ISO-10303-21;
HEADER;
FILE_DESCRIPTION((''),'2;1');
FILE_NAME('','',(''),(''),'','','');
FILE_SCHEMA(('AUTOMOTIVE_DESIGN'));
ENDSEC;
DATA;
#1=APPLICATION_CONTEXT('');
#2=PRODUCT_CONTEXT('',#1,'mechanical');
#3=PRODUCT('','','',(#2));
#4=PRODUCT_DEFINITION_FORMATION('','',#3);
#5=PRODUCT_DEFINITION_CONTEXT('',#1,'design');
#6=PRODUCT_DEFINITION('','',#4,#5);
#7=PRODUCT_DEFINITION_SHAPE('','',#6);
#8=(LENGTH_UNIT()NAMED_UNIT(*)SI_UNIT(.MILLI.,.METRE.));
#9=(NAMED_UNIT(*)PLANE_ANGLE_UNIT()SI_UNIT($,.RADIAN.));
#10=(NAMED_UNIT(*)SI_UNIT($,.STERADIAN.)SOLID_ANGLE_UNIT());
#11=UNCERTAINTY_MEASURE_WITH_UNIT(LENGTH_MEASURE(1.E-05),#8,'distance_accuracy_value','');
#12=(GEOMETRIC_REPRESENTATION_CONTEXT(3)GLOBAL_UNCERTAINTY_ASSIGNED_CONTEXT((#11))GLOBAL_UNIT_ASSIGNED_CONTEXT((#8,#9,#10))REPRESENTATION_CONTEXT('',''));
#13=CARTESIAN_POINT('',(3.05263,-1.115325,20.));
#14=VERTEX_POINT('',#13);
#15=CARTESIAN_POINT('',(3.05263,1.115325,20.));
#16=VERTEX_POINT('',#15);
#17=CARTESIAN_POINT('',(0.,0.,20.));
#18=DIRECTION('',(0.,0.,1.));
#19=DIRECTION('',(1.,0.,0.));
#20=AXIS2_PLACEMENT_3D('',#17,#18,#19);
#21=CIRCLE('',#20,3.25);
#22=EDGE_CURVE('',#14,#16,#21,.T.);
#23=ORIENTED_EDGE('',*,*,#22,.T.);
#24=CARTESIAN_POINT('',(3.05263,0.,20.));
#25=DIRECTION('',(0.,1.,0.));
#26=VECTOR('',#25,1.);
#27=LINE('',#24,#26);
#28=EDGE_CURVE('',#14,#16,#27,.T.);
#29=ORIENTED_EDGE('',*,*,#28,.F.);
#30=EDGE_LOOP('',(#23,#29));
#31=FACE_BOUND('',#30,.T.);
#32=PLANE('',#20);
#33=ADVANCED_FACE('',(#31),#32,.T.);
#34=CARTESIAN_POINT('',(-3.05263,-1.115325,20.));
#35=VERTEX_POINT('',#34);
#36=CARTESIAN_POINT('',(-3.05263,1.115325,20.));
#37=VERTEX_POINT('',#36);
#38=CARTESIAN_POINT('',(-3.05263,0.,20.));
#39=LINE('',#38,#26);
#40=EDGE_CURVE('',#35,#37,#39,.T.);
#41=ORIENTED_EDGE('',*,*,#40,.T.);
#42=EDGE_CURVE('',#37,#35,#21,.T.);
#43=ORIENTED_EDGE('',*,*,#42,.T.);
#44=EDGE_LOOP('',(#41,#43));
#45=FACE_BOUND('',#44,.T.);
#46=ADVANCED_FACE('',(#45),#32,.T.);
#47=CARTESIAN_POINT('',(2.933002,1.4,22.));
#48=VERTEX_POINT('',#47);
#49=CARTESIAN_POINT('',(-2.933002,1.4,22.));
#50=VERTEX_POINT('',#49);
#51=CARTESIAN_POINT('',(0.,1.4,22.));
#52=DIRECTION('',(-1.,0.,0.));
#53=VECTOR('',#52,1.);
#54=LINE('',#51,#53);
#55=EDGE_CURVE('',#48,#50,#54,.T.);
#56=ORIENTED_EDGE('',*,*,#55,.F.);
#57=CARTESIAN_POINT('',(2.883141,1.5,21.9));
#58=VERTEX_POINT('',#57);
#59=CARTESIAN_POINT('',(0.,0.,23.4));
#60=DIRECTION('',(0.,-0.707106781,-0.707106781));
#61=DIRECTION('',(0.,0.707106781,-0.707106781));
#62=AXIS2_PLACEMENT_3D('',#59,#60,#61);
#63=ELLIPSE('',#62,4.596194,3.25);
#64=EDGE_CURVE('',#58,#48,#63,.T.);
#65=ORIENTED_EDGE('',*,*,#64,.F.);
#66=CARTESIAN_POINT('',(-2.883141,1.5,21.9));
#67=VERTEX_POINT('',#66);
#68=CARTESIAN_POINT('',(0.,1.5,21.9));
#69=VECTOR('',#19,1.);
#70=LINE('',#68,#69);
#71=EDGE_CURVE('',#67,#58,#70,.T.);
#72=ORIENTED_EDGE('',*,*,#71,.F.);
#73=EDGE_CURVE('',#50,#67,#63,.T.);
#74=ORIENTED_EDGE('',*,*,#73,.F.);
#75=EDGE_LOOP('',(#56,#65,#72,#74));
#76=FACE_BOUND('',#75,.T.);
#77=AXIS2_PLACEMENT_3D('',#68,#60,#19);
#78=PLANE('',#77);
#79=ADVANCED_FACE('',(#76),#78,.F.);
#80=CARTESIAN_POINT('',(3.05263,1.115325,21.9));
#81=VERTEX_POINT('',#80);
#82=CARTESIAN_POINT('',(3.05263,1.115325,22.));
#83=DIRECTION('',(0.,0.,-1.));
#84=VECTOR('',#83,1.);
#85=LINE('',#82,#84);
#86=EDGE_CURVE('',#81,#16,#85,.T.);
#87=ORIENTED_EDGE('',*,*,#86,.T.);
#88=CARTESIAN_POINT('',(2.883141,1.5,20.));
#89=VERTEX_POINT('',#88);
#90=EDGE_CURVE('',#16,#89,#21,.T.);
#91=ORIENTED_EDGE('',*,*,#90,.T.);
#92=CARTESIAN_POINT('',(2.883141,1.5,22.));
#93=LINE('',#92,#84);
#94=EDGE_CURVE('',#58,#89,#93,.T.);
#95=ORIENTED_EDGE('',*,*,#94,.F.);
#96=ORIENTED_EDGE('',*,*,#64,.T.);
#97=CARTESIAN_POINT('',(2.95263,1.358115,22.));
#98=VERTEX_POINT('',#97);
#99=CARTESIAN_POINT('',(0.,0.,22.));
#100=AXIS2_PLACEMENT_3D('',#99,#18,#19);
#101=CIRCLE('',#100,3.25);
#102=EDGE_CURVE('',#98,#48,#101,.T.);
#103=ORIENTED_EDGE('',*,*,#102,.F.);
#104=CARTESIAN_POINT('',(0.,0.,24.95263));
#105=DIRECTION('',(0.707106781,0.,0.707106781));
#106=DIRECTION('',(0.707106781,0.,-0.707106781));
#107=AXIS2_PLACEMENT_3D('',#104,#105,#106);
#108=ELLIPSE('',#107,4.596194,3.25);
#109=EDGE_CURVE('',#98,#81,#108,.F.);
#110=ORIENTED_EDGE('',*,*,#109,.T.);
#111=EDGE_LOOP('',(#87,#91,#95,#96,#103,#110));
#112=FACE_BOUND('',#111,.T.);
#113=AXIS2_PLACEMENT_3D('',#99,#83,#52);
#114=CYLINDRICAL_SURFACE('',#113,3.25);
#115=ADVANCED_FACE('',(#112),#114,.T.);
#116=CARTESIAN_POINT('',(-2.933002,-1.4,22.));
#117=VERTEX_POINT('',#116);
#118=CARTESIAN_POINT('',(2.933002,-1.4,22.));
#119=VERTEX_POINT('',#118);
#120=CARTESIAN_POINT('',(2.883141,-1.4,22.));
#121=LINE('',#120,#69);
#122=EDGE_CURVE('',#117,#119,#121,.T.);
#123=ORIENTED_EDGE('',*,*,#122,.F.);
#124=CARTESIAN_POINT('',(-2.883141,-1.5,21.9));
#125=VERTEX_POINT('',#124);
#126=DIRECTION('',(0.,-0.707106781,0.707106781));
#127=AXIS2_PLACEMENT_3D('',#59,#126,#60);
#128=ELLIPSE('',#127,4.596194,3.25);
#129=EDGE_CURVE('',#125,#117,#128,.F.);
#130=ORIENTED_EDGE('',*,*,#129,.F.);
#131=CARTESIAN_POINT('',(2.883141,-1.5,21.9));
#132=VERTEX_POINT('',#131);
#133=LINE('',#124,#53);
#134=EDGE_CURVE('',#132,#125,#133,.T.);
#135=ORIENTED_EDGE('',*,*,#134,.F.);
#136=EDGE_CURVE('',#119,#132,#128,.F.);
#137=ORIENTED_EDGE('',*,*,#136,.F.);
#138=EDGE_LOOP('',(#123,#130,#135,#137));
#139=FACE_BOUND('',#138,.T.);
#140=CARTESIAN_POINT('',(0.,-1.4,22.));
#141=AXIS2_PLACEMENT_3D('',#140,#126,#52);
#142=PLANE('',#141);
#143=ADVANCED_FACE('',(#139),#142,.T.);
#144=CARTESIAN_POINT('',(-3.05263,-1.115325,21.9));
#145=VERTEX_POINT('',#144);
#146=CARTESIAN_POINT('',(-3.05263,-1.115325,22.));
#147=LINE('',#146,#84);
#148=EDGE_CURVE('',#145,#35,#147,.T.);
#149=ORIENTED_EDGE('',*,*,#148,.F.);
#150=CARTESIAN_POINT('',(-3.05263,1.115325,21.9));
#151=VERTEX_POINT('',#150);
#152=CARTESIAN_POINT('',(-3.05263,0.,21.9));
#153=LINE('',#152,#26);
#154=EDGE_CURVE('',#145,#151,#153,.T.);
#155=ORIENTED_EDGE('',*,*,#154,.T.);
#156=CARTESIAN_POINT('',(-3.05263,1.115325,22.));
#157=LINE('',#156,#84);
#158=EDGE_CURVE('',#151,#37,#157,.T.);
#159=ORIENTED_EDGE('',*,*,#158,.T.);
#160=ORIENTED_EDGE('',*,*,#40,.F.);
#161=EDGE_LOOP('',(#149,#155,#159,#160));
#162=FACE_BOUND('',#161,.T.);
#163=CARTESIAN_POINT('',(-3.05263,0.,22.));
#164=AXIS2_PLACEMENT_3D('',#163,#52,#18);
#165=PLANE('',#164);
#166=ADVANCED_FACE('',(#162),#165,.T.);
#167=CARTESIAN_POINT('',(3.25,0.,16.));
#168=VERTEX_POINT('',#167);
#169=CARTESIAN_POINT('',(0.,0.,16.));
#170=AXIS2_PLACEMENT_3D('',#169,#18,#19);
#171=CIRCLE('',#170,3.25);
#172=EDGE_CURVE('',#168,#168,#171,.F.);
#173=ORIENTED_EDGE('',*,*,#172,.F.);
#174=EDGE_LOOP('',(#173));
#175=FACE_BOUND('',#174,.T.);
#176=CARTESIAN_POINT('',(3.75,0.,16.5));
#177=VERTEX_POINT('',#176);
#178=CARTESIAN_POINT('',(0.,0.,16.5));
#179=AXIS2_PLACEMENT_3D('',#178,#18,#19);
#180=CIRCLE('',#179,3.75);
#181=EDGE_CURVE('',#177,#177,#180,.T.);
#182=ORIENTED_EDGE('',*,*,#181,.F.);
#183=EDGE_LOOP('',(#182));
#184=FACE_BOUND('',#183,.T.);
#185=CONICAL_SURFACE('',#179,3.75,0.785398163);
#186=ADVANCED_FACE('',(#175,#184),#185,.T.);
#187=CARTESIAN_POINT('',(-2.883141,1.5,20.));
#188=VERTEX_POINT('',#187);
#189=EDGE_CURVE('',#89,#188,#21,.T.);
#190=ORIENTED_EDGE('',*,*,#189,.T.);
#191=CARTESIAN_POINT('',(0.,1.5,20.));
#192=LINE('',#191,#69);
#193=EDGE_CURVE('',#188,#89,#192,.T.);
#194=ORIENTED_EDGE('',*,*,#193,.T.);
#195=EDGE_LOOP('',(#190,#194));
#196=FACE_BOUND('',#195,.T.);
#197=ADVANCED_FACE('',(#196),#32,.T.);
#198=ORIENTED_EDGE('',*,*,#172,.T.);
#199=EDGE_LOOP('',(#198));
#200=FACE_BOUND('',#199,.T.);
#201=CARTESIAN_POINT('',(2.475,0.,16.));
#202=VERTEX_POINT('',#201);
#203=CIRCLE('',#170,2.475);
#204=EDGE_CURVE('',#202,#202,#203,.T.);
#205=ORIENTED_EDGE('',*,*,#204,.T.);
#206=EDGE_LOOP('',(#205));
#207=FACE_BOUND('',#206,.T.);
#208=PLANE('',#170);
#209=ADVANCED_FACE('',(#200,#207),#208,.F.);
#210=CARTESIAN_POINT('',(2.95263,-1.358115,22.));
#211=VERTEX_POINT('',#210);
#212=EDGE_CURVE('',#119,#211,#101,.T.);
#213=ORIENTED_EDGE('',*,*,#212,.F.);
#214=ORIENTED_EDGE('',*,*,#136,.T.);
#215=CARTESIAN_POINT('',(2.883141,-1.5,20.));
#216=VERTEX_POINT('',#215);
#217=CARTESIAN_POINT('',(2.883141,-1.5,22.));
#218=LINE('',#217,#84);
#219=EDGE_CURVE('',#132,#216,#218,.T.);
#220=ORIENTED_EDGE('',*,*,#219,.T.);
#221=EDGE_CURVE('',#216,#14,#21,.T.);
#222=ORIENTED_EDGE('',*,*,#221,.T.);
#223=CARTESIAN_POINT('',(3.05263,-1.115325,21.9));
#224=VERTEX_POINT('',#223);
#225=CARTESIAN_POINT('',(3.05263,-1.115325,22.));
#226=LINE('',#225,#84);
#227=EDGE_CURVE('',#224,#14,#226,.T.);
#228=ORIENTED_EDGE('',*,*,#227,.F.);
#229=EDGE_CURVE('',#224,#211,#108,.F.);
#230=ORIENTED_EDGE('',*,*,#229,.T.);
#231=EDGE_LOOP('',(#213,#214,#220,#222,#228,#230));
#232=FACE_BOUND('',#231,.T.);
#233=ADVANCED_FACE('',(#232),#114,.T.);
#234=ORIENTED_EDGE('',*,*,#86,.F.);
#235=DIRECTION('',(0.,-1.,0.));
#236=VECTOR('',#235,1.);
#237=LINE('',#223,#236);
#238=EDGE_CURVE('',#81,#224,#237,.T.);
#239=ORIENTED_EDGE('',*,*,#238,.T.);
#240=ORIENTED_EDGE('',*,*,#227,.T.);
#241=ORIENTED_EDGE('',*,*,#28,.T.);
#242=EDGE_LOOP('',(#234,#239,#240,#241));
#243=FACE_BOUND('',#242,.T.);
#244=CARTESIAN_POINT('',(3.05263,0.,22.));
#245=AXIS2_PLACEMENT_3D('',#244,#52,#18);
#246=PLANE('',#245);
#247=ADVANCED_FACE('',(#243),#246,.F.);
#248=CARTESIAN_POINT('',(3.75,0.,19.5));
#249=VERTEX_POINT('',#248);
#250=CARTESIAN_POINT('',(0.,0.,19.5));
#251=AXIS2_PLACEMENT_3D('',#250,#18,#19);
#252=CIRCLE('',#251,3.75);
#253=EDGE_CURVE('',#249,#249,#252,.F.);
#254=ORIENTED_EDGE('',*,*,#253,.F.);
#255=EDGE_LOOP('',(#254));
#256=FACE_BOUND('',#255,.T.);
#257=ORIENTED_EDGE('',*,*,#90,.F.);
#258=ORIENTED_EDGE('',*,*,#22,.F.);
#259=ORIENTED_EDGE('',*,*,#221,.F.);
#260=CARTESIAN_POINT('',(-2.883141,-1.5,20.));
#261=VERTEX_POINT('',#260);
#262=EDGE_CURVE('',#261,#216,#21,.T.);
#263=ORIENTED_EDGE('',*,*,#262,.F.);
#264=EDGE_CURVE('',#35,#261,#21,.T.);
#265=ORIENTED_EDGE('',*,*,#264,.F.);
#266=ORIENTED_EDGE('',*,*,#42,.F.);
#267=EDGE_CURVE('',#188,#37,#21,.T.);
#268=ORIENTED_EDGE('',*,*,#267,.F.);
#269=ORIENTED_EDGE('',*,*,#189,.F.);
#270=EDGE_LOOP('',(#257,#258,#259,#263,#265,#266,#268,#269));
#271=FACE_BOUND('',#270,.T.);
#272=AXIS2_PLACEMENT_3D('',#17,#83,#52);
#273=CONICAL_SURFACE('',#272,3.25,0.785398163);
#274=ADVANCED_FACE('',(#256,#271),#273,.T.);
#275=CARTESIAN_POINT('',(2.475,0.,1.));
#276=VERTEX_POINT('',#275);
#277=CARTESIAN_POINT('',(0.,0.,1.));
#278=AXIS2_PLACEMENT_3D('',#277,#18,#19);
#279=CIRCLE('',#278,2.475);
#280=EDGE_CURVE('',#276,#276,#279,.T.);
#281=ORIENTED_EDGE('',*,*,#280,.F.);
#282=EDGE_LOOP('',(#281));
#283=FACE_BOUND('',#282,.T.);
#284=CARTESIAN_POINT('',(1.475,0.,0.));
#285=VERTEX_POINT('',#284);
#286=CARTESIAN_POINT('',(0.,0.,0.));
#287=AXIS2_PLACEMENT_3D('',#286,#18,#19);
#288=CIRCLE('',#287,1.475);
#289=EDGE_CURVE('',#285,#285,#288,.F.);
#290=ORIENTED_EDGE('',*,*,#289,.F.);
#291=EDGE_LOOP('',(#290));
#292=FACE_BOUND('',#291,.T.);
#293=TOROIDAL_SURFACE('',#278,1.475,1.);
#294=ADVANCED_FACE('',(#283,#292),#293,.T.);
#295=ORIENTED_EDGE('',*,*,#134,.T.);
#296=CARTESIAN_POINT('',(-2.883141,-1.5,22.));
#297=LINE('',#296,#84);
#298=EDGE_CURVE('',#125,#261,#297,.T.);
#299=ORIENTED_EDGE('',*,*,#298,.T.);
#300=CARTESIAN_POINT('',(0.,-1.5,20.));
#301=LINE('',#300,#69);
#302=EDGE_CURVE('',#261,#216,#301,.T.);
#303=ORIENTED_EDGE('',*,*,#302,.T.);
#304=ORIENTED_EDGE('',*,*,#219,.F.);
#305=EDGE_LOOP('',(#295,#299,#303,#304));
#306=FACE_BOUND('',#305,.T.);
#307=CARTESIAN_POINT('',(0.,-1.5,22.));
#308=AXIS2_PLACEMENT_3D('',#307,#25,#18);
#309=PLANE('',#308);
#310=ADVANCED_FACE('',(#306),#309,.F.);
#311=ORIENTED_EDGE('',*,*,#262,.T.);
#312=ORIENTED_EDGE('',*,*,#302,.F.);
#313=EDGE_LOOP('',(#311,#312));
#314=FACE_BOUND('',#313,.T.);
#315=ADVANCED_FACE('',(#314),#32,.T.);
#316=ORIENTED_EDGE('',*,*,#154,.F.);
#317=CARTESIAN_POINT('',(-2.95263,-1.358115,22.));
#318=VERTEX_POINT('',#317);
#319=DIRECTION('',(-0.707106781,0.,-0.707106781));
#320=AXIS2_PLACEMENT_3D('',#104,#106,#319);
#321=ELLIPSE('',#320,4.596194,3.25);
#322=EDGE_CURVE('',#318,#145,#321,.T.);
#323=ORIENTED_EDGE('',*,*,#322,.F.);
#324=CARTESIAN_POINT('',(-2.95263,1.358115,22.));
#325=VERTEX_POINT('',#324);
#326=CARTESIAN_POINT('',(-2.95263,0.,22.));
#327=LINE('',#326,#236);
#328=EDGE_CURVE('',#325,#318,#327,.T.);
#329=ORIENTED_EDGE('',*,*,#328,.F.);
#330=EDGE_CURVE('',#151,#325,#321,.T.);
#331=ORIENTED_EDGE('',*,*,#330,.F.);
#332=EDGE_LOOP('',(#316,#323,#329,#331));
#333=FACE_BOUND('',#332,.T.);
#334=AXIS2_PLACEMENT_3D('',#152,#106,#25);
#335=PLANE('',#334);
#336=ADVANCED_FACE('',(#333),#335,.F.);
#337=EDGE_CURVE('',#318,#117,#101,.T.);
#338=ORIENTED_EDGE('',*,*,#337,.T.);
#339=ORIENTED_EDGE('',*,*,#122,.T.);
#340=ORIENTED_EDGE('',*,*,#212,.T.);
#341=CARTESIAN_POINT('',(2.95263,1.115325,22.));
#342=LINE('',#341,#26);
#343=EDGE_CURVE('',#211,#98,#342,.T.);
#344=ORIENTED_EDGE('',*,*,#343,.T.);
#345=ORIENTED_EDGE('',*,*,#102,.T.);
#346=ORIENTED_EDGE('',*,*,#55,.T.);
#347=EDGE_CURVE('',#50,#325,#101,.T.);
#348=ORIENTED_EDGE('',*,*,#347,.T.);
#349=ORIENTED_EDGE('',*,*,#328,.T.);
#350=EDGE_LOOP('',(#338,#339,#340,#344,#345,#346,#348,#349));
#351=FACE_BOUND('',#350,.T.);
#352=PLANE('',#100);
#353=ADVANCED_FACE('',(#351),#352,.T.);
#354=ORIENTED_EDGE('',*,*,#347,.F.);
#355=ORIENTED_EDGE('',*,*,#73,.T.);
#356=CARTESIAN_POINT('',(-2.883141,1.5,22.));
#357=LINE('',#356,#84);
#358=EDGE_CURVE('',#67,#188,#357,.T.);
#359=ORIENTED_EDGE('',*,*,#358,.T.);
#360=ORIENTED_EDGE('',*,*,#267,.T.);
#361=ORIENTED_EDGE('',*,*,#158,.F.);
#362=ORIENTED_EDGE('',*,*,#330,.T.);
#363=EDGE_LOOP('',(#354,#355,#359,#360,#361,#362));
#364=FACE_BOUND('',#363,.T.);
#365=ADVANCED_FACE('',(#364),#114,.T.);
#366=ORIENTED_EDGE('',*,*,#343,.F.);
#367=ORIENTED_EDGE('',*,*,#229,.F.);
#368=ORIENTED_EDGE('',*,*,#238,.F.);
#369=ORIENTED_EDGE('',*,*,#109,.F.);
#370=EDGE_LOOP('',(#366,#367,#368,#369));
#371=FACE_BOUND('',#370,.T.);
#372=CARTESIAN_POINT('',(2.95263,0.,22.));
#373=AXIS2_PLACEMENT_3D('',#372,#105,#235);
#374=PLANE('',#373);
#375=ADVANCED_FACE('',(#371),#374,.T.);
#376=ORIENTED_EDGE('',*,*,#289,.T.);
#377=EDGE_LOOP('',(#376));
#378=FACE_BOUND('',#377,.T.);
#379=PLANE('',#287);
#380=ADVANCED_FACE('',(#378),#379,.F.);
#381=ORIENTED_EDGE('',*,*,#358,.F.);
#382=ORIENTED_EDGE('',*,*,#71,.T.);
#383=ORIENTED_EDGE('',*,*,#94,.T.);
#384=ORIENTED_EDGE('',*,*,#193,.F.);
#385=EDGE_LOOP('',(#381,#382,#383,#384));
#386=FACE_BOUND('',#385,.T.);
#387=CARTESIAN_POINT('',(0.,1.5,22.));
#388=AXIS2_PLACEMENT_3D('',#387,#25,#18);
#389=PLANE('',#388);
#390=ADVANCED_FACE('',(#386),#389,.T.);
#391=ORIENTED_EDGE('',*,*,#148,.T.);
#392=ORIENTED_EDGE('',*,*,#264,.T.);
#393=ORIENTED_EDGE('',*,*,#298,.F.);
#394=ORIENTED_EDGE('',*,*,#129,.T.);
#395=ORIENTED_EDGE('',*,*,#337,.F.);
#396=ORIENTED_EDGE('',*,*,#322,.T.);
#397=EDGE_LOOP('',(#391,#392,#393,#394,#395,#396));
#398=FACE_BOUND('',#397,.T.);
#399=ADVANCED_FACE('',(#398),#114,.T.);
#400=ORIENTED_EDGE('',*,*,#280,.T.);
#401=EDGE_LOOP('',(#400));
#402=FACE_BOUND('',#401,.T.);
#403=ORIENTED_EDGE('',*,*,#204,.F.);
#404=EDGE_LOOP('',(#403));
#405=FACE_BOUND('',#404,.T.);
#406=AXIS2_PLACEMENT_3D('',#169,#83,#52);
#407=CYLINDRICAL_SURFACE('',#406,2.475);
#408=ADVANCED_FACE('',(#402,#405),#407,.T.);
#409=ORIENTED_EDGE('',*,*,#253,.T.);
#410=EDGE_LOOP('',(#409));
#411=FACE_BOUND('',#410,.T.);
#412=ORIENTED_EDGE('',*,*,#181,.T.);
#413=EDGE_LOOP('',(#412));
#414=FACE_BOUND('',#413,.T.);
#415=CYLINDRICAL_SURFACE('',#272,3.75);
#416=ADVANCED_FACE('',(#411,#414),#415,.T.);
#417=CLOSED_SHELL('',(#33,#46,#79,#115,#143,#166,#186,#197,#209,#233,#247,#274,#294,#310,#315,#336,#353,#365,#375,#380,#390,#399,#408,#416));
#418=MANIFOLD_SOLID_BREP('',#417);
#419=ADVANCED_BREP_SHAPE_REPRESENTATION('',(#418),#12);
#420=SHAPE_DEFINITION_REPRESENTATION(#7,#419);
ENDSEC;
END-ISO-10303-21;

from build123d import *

# Parameters (mm, degrees)
SKETCH_1_R      = 2.475
EXTRUDE_1_DEPTH = 16
SKETCH_2_R      = 3.75
EXTRUDE_2_DEPTH = 4
CHAMFER_1_SIZE  = 0.5
EXTRUDE_3_DEPTH = 2
CHAMFER_2_SIZE  = 0.1
FILLET_1_R      = 1


# Read off the part's stored shape, not the designer's step: the extrude step
with BuildPart() as part:
    # 스케치1 → 보스-돌출1 (new body)
    with BuildSketch(Plane.XY):
        Circle(SKETCH_1_R)
    extrude(amount=EXTRUDE_1_DEPTH)

    # 스케치2 → 보스-돌출2 (add)
    with BuildSketch(Plane.XY.offset(16)):
        Circle(SKETCH_2_R)
    extrude(amount=EXTRUDE_2_DEPTH)

    # 모따기1
    chamfer_1_edges = [part.edges().sort_by_distance(p)[0] for p in [
        (-3.75, 0, 16),
        (-3.75, 0, 20),
    ]]
    chamfer(chamfer_1_edges, length=CHAMFER_1_SIZE)

    # 보스-돌출3 outline → 보스-돌출3 (add)
    with BuildSketch(Plane.XY.offset(20)):
        with BuildLine():
            ThreePointArc((2.883140649, -1.5), (2.974111162, -1.310405585), (3.05263006, -1.115324937))
            Line((3.05263006, -1.115324937), (3.05263006, 1.115324937))
            ThreePointArc((3.05263006, 1.115324937), (2.974111162, 1.310405585), (2.883140649, 1.5))
            Line((2.883140649, 1.5), (-2.883140649, 1.5))
            ThreePointArc((-2.883140649, 1.5), (-2.974111162, 1.310405585), (-3.05263006, 1.115324937))
            Line((-3.05263006, 1.115324937), (-3.05263006, -1.115324937))
            ThreePointArc((-3.05263006, -1.115324937), (-2.974111162, -1.310405585), (-2.883140649, -1.5))
            Line((-2.883140649, -1.5), (2.883140649, -1.5))
        make_face()
    extrude(amount=EXTRUDE_3_DEPTH)

    # 모따기2
    chamfer_2_edges = [part.edges().sort_by_distance(p)[0] for p in [
        (3.05263006, 0, 22),
        (-3.05263006, 0, 22),
        (0, -1.5, 22),
        (0, 1.5, 22),
    ]]
    chamfer(chamfer_2_edges, length=CHAMFER_2_SIZE)

    # 필렛1
    fillet_1_edges = [part.edges().sort_by_distance(p)[0] for p in [
        (-2.475, 0, 0),
    ]]
    fillet(fillet_1_edges, radius=FILLET_1_R)


solid = part.part
